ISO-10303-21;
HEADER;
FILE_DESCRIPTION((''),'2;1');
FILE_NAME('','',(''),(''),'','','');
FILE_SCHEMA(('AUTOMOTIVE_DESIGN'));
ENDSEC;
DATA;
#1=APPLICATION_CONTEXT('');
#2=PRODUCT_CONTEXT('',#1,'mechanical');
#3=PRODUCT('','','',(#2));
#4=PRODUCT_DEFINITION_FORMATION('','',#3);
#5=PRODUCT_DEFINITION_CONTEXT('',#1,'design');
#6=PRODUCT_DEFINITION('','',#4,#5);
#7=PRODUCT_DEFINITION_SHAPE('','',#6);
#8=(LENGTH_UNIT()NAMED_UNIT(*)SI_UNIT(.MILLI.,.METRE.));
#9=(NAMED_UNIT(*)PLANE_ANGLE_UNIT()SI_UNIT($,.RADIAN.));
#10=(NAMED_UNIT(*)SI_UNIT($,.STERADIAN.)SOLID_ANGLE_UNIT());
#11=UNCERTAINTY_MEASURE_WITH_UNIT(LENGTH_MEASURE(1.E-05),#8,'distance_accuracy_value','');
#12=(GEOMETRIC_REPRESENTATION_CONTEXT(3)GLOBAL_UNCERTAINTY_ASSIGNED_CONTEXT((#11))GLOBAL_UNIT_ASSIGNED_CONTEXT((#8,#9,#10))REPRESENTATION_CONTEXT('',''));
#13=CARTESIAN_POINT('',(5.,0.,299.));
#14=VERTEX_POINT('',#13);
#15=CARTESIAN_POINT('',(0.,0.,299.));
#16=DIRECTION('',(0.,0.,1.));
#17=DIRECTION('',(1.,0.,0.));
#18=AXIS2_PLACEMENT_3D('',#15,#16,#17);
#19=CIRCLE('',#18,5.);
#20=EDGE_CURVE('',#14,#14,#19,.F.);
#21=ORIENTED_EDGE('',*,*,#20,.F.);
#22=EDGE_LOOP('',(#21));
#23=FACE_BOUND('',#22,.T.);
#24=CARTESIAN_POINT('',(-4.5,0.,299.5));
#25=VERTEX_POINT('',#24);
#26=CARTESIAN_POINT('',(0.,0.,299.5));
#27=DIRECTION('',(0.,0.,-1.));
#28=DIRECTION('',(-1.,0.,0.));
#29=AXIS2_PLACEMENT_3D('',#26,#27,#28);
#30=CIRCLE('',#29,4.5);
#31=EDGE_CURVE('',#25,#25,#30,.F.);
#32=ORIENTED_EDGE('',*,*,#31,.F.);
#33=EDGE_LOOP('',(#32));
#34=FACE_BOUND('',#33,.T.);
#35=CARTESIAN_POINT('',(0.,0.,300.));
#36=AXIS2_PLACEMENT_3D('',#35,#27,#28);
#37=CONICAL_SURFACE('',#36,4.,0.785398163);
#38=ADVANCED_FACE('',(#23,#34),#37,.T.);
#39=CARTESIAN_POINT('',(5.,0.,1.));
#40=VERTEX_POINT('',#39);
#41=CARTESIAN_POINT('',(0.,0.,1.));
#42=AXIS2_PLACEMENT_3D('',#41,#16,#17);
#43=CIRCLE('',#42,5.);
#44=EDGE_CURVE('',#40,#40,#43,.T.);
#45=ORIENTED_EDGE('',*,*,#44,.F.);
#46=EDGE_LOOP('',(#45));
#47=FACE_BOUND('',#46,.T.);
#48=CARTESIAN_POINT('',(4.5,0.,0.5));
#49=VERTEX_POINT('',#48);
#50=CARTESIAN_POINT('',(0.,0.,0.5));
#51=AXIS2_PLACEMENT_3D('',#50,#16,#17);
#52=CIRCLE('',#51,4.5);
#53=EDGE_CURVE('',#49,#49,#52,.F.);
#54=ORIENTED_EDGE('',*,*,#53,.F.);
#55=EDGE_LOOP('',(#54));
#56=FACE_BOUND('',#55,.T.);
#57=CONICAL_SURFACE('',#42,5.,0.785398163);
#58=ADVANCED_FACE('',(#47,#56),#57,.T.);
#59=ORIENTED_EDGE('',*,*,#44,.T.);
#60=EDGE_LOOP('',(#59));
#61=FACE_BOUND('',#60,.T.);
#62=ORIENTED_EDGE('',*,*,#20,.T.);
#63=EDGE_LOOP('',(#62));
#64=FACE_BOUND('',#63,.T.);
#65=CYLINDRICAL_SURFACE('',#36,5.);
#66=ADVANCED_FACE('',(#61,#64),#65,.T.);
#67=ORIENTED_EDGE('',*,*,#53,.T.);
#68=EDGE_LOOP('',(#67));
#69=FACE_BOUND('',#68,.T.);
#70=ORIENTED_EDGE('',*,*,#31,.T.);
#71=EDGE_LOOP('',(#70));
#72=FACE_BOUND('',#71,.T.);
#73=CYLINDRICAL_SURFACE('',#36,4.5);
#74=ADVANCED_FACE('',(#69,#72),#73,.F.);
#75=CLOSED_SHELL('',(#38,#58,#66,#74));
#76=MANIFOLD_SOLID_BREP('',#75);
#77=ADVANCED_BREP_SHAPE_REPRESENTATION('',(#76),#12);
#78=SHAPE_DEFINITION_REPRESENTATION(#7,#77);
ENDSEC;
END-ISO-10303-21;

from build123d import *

# Parameters (mm, degrees)
SZKIC1_R                    = 5
SZKIC1_R_2                  = 4.5
DODANIE_WYCI_GNI_CIE1_DEPTH = 300
SFAZOWANIE1_SIZE            = 1


with BuildPart() as part:
    # Szkic1 → Dodanie-wyciągnięcie1 (new body)
    with BuildSketch(Plane.XY):
        Circle(SZKIC1_R)
        Circle(SZKIC1_R_2, mode=Mode.SUBTRACT)
    extrude(amount=DODANIE_WYCI_GNI_CIE1_DEPTH)

    # Sfazowanie1
    # the kernel refuses this chamfer: 1 mm, written as the material it takes off along each edge
    with BuildSketch(Plane(origin=(0, 0, 0), x_dir=(1, 0, 0), z_dir=(0, -1, 0))) as sfazowanie1_piece_1:
        Polygon((5, SFAZOWANIE1_SIZE), (5 - SFAZOWANIE1_SIZE, 0), (5, 0), align=None)
    revolve(axis=Axis((0, 0, 0), (0, 0, 1)), mode=Mode.SUBTRACT)
    with BuildSketch(Plane(origin=(0, 0, 300), x_dir=(1, 0, 0), z_dir=(0, -1, 0))) as sfazowanie1_piece_2:
        Polygon((5, -SFAZOWANIE1_SIZE), (5 - SFAZOWANIE1_SIZE, 0), (5, 0), align=None)
    revolve(axis=Axis((0, 0, 300), (0, 0, 1)), mode=Mode.SUBTRACT)


solid = part.part
